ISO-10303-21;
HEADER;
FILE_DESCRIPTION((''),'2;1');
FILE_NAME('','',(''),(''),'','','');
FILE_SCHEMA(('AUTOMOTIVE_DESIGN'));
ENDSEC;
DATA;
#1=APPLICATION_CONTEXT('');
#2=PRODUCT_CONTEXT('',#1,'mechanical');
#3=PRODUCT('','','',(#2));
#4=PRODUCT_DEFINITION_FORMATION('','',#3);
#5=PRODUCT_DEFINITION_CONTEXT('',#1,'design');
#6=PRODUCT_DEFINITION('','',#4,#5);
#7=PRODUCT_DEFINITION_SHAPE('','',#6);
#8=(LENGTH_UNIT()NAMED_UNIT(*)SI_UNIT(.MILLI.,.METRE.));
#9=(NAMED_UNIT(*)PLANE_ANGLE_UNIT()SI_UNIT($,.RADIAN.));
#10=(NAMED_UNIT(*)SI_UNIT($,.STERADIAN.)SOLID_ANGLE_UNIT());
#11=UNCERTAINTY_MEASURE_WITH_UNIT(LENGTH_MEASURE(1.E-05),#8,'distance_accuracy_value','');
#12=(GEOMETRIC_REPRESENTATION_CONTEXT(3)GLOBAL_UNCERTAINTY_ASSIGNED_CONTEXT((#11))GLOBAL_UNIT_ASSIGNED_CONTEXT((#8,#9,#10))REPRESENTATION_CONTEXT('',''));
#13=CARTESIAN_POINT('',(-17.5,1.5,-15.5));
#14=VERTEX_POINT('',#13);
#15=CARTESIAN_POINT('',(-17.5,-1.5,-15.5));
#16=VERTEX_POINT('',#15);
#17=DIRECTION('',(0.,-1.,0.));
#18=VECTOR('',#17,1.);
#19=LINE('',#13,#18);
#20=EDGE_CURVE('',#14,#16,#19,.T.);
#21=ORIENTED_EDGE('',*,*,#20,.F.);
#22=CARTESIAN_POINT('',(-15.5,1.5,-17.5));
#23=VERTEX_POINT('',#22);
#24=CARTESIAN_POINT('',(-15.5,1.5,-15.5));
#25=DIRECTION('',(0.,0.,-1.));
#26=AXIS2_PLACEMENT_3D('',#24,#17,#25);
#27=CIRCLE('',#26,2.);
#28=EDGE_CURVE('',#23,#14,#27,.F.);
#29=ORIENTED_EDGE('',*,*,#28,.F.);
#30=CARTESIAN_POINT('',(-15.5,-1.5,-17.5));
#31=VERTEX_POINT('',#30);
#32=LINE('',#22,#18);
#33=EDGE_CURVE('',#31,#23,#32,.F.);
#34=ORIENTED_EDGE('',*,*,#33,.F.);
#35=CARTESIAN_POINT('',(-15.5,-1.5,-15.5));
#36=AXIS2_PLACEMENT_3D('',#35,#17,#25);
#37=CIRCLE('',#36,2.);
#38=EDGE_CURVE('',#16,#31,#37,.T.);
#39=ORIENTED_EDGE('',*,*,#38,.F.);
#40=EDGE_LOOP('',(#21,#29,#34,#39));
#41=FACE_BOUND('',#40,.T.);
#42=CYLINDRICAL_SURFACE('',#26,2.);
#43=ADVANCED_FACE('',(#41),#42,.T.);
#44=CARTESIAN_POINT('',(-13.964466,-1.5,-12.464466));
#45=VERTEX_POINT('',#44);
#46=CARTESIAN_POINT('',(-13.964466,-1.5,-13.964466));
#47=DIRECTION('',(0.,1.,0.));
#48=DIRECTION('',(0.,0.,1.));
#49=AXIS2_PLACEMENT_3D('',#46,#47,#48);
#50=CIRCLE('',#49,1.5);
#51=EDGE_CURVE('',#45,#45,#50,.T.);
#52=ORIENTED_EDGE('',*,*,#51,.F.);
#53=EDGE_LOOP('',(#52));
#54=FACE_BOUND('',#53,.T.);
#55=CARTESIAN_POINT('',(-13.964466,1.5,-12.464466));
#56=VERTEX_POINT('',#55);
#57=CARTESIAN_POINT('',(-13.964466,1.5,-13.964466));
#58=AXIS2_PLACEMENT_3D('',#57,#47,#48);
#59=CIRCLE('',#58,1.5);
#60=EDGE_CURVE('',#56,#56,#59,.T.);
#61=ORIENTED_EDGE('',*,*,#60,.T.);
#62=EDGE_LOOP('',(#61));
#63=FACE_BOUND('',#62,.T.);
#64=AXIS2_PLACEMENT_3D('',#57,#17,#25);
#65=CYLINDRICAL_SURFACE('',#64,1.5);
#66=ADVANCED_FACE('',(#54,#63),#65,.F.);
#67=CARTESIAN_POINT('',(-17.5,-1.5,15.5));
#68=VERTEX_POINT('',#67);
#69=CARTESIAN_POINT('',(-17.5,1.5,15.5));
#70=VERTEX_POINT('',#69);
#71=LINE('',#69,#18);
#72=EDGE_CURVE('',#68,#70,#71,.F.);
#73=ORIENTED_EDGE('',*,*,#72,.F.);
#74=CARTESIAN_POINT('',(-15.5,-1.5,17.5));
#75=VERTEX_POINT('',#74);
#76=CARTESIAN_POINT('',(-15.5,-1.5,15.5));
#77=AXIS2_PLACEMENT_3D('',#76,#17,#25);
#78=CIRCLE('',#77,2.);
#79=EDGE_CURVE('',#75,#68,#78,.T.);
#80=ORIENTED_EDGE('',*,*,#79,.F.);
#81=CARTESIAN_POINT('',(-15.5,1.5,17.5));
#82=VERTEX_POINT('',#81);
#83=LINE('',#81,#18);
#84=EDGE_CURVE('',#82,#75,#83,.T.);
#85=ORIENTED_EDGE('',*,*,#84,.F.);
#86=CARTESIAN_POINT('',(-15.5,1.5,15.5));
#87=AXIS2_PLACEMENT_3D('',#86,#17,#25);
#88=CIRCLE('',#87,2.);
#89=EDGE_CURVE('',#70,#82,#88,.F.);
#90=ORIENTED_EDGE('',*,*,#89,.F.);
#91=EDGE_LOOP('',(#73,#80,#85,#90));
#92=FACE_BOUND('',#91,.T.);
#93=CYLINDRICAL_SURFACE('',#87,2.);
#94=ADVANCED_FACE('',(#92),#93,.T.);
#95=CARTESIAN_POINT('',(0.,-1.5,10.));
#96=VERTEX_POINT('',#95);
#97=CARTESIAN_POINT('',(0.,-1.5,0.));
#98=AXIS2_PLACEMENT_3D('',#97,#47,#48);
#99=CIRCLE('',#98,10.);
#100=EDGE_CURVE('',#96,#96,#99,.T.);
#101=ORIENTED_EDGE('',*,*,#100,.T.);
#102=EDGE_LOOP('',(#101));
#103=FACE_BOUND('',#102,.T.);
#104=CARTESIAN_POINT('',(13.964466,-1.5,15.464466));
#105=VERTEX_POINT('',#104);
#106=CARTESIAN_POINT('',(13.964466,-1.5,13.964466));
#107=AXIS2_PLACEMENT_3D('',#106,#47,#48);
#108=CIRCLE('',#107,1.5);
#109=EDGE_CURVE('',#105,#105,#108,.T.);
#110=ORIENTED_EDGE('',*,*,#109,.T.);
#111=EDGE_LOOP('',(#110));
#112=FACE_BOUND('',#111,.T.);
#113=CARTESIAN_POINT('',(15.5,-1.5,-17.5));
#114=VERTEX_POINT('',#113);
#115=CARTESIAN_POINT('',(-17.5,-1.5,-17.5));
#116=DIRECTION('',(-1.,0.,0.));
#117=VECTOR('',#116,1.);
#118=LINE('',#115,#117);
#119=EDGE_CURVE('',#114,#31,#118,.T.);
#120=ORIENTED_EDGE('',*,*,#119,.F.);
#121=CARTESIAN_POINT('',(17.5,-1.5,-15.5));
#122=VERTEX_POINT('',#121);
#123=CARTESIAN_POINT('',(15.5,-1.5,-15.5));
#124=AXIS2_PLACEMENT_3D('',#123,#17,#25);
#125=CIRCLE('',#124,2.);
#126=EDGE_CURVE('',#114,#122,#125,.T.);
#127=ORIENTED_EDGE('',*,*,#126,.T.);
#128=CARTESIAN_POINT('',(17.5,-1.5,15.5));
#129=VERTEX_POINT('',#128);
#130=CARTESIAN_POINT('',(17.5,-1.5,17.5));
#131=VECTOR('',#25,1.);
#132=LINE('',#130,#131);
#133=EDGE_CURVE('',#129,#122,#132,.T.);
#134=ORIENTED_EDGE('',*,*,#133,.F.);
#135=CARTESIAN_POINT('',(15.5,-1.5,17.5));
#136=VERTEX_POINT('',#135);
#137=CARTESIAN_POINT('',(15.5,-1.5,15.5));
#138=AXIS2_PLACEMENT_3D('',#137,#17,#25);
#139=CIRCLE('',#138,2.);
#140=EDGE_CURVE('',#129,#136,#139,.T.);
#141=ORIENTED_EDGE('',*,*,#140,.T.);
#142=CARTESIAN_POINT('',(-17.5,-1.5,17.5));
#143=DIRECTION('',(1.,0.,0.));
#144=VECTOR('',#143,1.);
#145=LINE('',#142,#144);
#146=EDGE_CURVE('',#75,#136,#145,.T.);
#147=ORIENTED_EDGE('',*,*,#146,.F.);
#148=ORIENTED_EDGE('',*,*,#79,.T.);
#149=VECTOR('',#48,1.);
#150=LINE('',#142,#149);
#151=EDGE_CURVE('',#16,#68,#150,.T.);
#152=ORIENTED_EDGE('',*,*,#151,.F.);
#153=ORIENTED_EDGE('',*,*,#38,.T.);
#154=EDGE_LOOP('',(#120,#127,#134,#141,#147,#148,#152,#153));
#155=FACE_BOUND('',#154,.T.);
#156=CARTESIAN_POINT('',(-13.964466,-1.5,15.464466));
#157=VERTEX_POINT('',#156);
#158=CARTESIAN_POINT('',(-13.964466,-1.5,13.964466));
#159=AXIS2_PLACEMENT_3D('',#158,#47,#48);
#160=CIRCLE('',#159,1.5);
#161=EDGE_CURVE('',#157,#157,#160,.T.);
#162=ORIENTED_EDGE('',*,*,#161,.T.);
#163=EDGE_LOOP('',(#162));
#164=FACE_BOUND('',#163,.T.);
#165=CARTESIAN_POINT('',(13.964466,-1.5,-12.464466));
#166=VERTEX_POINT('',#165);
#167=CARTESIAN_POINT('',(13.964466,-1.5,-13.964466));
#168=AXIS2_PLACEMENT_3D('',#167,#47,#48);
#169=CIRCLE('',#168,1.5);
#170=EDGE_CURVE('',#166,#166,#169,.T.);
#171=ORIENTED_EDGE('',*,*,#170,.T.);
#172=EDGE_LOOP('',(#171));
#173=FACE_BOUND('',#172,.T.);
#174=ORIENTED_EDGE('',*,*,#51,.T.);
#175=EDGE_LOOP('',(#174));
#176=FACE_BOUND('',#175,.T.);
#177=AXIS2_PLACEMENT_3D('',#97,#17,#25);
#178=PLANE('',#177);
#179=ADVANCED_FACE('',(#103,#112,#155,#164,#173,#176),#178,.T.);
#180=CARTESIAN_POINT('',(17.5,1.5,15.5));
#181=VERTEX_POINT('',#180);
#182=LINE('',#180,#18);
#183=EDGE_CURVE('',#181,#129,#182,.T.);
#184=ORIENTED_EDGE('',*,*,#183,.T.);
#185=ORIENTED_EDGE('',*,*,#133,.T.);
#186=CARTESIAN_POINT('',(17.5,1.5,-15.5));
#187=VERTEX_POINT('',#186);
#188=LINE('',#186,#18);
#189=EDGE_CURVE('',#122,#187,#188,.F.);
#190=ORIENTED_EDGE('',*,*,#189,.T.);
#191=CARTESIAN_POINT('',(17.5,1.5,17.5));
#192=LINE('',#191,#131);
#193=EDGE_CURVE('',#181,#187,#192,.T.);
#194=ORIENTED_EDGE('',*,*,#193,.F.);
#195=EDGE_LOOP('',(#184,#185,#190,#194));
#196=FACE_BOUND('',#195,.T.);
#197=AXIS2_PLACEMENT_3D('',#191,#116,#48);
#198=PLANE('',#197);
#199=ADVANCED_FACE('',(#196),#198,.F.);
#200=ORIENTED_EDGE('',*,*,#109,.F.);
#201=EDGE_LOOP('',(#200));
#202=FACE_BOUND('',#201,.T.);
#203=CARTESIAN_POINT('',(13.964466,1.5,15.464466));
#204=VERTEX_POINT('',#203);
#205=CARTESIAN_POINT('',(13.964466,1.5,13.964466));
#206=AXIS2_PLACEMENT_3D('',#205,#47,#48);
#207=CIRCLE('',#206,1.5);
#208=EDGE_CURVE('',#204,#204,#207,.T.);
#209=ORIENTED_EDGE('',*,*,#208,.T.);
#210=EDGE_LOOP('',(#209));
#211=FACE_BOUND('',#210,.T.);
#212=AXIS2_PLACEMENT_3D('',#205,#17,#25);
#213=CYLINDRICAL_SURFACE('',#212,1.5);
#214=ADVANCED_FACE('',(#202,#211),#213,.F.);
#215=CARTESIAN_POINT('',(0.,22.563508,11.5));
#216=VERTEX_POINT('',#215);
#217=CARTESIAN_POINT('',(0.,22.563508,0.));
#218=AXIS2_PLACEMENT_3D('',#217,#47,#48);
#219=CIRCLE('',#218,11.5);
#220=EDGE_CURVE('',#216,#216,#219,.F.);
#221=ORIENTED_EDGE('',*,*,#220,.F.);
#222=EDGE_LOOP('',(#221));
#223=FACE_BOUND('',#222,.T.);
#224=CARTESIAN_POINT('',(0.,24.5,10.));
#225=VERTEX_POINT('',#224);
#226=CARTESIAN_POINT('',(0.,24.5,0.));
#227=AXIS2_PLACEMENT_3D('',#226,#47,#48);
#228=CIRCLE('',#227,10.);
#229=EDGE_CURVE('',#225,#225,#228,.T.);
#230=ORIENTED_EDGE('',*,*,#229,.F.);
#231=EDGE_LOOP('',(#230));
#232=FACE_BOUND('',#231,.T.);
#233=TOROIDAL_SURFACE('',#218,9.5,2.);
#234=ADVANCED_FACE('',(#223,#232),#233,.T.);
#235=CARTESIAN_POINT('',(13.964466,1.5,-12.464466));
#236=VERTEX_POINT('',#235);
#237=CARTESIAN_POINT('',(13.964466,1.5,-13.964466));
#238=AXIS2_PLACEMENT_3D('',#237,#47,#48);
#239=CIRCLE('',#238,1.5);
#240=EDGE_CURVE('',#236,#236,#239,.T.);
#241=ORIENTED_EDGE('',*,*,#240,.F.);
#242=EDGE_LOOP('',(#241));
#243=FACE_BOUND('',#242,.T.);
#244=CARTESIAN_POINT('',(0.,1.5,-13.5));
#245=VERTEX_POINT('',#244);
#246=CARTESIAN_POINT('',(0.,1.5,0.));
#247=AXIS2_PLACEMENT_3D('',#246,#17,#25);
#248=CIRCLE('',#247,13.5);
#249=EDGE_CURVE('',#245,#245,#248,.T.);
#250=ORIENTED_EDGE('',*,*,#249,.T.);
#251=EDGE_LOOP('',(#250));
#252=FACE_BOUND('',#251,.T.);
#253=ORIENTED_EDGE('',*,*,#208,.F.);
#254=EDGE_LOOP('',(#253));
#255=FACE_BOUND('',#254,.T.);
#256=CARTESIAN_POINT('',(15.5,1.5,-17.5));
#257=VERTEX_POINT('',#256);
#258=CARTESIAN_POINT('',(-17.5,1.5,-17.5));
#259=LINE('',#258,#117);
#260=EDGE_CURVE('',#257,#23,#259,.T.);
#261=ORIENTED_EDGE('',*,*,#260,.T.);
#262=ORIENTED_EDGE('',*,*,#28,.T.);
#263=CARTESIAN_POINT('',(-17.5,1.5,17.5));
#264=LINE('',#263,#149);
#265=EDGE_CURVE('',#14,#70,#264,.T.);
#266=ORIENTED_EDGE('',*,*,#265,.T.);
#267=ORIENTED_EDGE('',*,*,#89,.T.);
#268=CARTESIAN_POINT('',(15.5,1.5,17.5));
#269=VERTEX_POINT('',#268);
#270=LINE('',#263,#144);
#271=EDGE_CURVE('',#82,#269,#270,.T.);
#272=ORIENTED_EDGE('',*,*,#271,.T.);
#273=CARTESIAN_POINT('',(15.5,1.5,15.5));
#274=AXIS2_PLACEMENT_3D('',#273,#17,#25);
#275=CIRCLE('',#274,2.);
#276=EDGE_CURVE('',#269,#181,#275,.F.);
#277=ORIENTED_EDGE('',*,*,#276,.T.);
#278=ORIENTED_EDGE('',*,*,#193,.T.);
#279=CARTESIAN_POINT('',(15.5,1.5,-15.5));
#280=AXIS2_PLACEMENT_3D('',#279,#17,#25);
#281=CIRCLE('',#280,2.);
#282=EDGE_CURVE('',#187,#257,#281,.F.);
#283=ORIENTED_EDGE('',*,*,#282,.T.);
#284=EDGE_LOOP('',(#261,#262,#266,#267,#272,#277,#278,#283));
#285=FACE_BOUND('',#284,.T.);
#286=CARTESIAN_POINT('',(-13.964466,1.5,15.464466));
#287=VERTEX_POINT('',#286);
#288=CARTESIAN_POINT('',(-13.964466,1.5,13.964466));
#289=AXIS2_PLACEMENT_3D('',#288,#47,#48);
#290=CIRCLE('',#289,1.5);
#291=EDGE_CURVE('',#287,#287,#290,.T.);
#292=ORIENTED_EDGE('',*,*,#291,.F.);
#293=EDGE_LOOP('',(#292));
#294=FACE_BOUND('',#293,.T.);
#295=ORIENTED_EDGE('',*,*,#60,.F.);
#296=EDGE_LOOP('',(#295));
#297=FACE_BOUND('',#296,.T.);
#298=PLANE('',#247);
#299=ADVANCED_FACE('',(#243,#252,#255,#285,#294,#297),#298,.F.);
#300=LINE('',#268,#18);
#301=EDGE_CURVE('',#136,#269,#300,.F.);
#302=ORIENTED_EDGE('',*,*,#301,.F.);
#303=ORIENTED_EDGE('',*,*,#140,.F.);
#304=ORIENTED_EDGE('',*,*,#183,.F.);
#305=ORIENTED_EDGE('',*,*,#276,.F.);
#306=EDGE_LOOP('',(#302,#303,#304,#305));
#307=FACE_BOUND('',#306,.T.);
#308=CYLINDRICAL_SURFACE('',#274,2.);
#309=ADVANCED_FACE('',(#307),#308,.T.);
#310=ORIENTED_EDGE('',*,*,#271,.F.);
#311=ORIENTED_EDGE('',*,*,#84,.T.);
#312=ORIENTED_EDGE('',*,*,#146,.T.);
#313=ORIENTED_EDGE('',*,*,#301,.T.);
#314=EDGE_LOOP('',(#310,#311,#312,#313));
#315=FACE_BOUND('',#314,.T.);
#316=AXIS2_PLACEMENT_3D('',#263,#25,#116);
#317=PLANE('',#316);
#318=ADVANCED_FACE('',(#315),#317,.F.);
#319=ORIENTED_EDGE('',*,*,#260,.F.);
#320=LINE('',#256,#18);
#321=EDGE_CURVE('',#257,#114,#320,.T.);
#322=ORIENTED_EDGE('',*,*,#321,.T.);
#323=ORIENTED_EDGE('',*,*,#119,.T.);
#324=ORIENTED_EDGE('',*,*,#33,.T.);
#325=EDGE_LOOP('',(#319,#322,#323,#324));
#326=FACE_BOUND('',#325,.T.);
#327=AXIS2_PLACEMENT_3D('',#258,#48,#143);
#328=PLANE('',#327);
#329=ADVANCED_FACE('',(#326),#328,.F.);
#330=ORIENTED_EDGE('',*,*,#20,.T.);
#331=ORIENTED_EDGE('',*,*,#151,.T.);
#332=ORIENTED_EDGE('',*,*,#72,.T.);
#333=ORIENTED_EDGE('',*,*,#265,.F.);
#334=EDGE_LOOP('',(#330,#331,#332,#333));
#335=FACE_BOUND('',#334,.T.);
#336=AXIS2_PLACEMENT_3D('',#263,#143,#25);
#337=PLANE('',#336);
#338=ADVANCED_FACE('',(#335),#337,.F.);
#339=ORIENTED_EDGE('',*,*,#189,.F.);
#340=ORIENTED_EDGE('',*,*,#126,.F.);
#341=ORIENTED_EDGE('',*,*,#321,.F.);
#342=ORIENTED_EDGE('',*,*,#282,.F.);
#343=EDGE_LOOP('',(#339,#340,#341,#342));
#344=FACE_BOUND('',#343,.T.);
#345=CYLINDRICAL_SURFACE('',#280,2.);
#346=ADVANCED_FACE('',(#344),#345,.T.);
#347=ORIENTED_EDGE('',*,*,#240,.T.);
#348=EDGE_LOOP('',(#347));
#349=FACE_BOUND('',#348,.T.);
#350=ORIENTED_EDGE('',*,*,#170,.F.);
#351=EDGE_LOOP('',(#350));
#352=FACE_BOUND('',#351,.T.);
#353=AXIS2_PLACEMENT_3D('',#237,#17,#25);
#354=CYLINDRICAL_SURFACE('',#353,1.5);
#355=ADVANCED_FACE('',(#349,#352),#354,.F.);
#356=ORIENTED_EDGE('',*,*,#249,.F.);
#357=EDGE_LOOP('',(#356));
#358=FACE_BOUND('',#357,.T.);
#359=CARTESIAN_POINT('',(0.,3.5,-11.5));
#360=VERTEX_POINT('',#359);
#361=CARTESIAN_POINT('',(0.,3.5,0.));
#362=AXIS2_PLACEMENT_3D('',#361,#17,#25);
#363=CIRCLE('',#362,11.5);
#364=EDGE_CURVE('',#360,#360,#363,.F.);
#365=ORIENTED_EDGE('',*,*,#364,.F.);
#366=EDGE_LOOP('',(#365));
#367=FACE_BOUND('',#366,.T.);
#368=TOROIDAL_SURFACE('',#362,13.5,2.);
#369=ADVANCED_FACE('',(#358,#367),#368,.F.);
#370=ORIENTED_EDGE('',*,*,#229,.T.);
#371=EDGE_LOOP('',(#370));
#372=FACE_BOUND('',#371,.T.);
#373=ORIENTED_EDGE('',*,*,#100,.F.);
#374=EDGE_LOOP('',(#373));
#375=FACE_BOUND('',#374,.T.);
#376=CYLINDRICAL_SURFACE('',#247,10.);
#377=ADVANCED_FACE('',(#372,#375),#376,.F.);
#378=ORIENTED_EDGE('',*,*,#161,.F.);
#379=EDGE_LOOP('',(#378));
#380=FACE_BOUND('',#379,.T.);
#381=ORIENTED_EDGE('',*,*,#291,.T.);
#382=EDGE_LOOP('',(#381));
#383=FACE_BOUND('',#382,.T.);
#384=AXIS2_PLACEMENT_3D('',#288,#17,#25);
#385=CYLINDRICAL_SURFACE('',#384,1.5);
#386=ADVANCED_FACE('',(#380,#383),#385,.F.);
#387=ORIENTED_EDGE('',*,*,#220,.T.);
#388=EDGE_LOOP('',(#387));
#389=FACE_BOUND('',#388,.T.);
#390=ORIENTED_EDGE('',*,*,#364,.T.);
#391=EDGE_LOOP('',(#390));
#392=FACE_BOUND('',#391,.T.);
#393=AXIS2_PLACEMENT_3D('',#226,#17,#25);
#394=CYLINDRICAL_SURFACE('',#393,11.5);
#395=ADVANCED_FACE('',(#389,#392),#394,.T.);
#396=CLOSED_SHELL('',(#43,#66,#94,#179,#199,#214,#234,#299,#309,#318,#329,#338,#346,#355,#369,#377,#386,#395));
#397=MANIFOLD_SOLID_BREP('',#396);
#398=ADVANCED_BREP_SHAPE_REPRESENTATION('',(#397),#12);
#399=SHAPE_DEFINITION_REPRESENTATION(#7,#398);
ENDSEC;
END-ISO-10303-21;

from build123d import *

# Parameters (mm, degrees)
ESBO_O1_W                = 35
ESBO_O1_H                = 35
ESBO_O1_R                = 10
ESBO_O1_R_2              = 1.5
RESSALTO_EXTRUS_O1_DEPTH = 1.5
FILETE1_R                = 2
ESBO_O2_R                = 11.5
ESBO_O2_R_2              = 10
RESSALTO_EXTRUS_O2_DEPTH = 23
FILETE2_R                = 2


with BuildPart() as part:
    # Esboço1 → Ressalto-extrusão1 (new, symmetric)
    with BuildSketch(Plane(origin=(0, 0, 0), x_dir=(1, 0, 0), z_dir=(0, 1, 0))):
        Rectangle(ESBO_O1_W, ESBO_O1_H)
        with Locations(Location((0, 0, 0), (0, 0, 270))):
            Circle(ESBO_O1_R, mode=Mode.SUBTRACT)
        with Locations(Location((-13.964466094, 13.964466094, 0), (0, 0, 270))):
            Circle(ESBO_O1_R_2, mode=Mode.SUBTRACT)
        with Locations(Location((13.964466094, 13.964466094, 0), (0, 0, 270))):
            Circle(ESBO_O1_R_2, mode=Mode.SUBTRACT)
        with Locations(Location((13.964466094, -13.964466094, 0), (0, 0, 270))):
            Circle(ESBO_O1_R_2, mode=Mode.SUBTRACT)
        with Locations(Location((-13.964466094, -13.964466094, 0), (0, 0, 270))):
            Circle(ESBO_O1_R_2, mode=Mode.SUBTRACT)
    extrude(amount=RESSALTO_EXTRUS_O1_DEPTH, both=True)

    # Filete1
    filete1_edges = [part.edges().sort_by_distance(p)[0] for p in [
        (17.5, 0, 17.5),
        (-17.5, 0, 17.5),
        (-17.5, 0, -17.5),
        (17.5, 0, -17.5),
    ]]
    fillet(filete1_edges, radius=FILETE1_R)

    # Esboço2 → Ressalto-extrusão2 (add)
    with BuildSketch(Plane(origin=(0, 1.5, 0), x_dir=(1, 0, 0), z_dir=(0, 1, 0))):
        with Locations(Location((0, 0, 0), (0, 0, 90))):
            Circle(ESBO_O2_R)
        with Locations(Location((0, 0, 0), (0, 0, 270))):
            Circle(ESBO_O2_R_2, mode=Mode.SUBTRACT)
    extrude(amount=RESSALTO_EXTRUS_O2_DEPTH)

    # Filete2
    # the kernel refuses this fillet: 2 mm, written as the material it adds along each edge
    with BuildSketch(Plane(origin=(0, 1.5, 0), x_dir=(0, 0, -1), z_dir=(1, 0, 0))) as filete2_piece_1:
        with BuildLine():
            CenterArc((11.5 + FILETE2_R, FILETE2_R), FILETE2_R, 180, 90)
            Line((11.5, FILETE2_R), (11.5, 0))
            Line((11.5, 0), (11.5 + FILETE2_R, 0))
        make_face()
    revolve(axis=Axis((0, 1.5, 0), (0, 1, 0)))
    # the kernel refuses this fillet: 2 mm, written as the material it takes off along each edge
    with BuildSketch(Plane(origin=(0, 24.5, 0), x_dir=(0, 0, -1), z_dir=(1, 0, 0))) as filete2_2_piece_1:
        with BuildLine():
            CenterArc((9.5, -1.936491673), FILETE2_R, 0, 75.522487814)
            Line((11.5, -1.936491673), (11.5, 0))
            Line((11.5, 0), (10, 0))
        make_face()
    revolve(axis=Axis((0, 24.5, 0), (0, 1, 0)), mode=Mode.SUBTRACT)


solid = part.part
